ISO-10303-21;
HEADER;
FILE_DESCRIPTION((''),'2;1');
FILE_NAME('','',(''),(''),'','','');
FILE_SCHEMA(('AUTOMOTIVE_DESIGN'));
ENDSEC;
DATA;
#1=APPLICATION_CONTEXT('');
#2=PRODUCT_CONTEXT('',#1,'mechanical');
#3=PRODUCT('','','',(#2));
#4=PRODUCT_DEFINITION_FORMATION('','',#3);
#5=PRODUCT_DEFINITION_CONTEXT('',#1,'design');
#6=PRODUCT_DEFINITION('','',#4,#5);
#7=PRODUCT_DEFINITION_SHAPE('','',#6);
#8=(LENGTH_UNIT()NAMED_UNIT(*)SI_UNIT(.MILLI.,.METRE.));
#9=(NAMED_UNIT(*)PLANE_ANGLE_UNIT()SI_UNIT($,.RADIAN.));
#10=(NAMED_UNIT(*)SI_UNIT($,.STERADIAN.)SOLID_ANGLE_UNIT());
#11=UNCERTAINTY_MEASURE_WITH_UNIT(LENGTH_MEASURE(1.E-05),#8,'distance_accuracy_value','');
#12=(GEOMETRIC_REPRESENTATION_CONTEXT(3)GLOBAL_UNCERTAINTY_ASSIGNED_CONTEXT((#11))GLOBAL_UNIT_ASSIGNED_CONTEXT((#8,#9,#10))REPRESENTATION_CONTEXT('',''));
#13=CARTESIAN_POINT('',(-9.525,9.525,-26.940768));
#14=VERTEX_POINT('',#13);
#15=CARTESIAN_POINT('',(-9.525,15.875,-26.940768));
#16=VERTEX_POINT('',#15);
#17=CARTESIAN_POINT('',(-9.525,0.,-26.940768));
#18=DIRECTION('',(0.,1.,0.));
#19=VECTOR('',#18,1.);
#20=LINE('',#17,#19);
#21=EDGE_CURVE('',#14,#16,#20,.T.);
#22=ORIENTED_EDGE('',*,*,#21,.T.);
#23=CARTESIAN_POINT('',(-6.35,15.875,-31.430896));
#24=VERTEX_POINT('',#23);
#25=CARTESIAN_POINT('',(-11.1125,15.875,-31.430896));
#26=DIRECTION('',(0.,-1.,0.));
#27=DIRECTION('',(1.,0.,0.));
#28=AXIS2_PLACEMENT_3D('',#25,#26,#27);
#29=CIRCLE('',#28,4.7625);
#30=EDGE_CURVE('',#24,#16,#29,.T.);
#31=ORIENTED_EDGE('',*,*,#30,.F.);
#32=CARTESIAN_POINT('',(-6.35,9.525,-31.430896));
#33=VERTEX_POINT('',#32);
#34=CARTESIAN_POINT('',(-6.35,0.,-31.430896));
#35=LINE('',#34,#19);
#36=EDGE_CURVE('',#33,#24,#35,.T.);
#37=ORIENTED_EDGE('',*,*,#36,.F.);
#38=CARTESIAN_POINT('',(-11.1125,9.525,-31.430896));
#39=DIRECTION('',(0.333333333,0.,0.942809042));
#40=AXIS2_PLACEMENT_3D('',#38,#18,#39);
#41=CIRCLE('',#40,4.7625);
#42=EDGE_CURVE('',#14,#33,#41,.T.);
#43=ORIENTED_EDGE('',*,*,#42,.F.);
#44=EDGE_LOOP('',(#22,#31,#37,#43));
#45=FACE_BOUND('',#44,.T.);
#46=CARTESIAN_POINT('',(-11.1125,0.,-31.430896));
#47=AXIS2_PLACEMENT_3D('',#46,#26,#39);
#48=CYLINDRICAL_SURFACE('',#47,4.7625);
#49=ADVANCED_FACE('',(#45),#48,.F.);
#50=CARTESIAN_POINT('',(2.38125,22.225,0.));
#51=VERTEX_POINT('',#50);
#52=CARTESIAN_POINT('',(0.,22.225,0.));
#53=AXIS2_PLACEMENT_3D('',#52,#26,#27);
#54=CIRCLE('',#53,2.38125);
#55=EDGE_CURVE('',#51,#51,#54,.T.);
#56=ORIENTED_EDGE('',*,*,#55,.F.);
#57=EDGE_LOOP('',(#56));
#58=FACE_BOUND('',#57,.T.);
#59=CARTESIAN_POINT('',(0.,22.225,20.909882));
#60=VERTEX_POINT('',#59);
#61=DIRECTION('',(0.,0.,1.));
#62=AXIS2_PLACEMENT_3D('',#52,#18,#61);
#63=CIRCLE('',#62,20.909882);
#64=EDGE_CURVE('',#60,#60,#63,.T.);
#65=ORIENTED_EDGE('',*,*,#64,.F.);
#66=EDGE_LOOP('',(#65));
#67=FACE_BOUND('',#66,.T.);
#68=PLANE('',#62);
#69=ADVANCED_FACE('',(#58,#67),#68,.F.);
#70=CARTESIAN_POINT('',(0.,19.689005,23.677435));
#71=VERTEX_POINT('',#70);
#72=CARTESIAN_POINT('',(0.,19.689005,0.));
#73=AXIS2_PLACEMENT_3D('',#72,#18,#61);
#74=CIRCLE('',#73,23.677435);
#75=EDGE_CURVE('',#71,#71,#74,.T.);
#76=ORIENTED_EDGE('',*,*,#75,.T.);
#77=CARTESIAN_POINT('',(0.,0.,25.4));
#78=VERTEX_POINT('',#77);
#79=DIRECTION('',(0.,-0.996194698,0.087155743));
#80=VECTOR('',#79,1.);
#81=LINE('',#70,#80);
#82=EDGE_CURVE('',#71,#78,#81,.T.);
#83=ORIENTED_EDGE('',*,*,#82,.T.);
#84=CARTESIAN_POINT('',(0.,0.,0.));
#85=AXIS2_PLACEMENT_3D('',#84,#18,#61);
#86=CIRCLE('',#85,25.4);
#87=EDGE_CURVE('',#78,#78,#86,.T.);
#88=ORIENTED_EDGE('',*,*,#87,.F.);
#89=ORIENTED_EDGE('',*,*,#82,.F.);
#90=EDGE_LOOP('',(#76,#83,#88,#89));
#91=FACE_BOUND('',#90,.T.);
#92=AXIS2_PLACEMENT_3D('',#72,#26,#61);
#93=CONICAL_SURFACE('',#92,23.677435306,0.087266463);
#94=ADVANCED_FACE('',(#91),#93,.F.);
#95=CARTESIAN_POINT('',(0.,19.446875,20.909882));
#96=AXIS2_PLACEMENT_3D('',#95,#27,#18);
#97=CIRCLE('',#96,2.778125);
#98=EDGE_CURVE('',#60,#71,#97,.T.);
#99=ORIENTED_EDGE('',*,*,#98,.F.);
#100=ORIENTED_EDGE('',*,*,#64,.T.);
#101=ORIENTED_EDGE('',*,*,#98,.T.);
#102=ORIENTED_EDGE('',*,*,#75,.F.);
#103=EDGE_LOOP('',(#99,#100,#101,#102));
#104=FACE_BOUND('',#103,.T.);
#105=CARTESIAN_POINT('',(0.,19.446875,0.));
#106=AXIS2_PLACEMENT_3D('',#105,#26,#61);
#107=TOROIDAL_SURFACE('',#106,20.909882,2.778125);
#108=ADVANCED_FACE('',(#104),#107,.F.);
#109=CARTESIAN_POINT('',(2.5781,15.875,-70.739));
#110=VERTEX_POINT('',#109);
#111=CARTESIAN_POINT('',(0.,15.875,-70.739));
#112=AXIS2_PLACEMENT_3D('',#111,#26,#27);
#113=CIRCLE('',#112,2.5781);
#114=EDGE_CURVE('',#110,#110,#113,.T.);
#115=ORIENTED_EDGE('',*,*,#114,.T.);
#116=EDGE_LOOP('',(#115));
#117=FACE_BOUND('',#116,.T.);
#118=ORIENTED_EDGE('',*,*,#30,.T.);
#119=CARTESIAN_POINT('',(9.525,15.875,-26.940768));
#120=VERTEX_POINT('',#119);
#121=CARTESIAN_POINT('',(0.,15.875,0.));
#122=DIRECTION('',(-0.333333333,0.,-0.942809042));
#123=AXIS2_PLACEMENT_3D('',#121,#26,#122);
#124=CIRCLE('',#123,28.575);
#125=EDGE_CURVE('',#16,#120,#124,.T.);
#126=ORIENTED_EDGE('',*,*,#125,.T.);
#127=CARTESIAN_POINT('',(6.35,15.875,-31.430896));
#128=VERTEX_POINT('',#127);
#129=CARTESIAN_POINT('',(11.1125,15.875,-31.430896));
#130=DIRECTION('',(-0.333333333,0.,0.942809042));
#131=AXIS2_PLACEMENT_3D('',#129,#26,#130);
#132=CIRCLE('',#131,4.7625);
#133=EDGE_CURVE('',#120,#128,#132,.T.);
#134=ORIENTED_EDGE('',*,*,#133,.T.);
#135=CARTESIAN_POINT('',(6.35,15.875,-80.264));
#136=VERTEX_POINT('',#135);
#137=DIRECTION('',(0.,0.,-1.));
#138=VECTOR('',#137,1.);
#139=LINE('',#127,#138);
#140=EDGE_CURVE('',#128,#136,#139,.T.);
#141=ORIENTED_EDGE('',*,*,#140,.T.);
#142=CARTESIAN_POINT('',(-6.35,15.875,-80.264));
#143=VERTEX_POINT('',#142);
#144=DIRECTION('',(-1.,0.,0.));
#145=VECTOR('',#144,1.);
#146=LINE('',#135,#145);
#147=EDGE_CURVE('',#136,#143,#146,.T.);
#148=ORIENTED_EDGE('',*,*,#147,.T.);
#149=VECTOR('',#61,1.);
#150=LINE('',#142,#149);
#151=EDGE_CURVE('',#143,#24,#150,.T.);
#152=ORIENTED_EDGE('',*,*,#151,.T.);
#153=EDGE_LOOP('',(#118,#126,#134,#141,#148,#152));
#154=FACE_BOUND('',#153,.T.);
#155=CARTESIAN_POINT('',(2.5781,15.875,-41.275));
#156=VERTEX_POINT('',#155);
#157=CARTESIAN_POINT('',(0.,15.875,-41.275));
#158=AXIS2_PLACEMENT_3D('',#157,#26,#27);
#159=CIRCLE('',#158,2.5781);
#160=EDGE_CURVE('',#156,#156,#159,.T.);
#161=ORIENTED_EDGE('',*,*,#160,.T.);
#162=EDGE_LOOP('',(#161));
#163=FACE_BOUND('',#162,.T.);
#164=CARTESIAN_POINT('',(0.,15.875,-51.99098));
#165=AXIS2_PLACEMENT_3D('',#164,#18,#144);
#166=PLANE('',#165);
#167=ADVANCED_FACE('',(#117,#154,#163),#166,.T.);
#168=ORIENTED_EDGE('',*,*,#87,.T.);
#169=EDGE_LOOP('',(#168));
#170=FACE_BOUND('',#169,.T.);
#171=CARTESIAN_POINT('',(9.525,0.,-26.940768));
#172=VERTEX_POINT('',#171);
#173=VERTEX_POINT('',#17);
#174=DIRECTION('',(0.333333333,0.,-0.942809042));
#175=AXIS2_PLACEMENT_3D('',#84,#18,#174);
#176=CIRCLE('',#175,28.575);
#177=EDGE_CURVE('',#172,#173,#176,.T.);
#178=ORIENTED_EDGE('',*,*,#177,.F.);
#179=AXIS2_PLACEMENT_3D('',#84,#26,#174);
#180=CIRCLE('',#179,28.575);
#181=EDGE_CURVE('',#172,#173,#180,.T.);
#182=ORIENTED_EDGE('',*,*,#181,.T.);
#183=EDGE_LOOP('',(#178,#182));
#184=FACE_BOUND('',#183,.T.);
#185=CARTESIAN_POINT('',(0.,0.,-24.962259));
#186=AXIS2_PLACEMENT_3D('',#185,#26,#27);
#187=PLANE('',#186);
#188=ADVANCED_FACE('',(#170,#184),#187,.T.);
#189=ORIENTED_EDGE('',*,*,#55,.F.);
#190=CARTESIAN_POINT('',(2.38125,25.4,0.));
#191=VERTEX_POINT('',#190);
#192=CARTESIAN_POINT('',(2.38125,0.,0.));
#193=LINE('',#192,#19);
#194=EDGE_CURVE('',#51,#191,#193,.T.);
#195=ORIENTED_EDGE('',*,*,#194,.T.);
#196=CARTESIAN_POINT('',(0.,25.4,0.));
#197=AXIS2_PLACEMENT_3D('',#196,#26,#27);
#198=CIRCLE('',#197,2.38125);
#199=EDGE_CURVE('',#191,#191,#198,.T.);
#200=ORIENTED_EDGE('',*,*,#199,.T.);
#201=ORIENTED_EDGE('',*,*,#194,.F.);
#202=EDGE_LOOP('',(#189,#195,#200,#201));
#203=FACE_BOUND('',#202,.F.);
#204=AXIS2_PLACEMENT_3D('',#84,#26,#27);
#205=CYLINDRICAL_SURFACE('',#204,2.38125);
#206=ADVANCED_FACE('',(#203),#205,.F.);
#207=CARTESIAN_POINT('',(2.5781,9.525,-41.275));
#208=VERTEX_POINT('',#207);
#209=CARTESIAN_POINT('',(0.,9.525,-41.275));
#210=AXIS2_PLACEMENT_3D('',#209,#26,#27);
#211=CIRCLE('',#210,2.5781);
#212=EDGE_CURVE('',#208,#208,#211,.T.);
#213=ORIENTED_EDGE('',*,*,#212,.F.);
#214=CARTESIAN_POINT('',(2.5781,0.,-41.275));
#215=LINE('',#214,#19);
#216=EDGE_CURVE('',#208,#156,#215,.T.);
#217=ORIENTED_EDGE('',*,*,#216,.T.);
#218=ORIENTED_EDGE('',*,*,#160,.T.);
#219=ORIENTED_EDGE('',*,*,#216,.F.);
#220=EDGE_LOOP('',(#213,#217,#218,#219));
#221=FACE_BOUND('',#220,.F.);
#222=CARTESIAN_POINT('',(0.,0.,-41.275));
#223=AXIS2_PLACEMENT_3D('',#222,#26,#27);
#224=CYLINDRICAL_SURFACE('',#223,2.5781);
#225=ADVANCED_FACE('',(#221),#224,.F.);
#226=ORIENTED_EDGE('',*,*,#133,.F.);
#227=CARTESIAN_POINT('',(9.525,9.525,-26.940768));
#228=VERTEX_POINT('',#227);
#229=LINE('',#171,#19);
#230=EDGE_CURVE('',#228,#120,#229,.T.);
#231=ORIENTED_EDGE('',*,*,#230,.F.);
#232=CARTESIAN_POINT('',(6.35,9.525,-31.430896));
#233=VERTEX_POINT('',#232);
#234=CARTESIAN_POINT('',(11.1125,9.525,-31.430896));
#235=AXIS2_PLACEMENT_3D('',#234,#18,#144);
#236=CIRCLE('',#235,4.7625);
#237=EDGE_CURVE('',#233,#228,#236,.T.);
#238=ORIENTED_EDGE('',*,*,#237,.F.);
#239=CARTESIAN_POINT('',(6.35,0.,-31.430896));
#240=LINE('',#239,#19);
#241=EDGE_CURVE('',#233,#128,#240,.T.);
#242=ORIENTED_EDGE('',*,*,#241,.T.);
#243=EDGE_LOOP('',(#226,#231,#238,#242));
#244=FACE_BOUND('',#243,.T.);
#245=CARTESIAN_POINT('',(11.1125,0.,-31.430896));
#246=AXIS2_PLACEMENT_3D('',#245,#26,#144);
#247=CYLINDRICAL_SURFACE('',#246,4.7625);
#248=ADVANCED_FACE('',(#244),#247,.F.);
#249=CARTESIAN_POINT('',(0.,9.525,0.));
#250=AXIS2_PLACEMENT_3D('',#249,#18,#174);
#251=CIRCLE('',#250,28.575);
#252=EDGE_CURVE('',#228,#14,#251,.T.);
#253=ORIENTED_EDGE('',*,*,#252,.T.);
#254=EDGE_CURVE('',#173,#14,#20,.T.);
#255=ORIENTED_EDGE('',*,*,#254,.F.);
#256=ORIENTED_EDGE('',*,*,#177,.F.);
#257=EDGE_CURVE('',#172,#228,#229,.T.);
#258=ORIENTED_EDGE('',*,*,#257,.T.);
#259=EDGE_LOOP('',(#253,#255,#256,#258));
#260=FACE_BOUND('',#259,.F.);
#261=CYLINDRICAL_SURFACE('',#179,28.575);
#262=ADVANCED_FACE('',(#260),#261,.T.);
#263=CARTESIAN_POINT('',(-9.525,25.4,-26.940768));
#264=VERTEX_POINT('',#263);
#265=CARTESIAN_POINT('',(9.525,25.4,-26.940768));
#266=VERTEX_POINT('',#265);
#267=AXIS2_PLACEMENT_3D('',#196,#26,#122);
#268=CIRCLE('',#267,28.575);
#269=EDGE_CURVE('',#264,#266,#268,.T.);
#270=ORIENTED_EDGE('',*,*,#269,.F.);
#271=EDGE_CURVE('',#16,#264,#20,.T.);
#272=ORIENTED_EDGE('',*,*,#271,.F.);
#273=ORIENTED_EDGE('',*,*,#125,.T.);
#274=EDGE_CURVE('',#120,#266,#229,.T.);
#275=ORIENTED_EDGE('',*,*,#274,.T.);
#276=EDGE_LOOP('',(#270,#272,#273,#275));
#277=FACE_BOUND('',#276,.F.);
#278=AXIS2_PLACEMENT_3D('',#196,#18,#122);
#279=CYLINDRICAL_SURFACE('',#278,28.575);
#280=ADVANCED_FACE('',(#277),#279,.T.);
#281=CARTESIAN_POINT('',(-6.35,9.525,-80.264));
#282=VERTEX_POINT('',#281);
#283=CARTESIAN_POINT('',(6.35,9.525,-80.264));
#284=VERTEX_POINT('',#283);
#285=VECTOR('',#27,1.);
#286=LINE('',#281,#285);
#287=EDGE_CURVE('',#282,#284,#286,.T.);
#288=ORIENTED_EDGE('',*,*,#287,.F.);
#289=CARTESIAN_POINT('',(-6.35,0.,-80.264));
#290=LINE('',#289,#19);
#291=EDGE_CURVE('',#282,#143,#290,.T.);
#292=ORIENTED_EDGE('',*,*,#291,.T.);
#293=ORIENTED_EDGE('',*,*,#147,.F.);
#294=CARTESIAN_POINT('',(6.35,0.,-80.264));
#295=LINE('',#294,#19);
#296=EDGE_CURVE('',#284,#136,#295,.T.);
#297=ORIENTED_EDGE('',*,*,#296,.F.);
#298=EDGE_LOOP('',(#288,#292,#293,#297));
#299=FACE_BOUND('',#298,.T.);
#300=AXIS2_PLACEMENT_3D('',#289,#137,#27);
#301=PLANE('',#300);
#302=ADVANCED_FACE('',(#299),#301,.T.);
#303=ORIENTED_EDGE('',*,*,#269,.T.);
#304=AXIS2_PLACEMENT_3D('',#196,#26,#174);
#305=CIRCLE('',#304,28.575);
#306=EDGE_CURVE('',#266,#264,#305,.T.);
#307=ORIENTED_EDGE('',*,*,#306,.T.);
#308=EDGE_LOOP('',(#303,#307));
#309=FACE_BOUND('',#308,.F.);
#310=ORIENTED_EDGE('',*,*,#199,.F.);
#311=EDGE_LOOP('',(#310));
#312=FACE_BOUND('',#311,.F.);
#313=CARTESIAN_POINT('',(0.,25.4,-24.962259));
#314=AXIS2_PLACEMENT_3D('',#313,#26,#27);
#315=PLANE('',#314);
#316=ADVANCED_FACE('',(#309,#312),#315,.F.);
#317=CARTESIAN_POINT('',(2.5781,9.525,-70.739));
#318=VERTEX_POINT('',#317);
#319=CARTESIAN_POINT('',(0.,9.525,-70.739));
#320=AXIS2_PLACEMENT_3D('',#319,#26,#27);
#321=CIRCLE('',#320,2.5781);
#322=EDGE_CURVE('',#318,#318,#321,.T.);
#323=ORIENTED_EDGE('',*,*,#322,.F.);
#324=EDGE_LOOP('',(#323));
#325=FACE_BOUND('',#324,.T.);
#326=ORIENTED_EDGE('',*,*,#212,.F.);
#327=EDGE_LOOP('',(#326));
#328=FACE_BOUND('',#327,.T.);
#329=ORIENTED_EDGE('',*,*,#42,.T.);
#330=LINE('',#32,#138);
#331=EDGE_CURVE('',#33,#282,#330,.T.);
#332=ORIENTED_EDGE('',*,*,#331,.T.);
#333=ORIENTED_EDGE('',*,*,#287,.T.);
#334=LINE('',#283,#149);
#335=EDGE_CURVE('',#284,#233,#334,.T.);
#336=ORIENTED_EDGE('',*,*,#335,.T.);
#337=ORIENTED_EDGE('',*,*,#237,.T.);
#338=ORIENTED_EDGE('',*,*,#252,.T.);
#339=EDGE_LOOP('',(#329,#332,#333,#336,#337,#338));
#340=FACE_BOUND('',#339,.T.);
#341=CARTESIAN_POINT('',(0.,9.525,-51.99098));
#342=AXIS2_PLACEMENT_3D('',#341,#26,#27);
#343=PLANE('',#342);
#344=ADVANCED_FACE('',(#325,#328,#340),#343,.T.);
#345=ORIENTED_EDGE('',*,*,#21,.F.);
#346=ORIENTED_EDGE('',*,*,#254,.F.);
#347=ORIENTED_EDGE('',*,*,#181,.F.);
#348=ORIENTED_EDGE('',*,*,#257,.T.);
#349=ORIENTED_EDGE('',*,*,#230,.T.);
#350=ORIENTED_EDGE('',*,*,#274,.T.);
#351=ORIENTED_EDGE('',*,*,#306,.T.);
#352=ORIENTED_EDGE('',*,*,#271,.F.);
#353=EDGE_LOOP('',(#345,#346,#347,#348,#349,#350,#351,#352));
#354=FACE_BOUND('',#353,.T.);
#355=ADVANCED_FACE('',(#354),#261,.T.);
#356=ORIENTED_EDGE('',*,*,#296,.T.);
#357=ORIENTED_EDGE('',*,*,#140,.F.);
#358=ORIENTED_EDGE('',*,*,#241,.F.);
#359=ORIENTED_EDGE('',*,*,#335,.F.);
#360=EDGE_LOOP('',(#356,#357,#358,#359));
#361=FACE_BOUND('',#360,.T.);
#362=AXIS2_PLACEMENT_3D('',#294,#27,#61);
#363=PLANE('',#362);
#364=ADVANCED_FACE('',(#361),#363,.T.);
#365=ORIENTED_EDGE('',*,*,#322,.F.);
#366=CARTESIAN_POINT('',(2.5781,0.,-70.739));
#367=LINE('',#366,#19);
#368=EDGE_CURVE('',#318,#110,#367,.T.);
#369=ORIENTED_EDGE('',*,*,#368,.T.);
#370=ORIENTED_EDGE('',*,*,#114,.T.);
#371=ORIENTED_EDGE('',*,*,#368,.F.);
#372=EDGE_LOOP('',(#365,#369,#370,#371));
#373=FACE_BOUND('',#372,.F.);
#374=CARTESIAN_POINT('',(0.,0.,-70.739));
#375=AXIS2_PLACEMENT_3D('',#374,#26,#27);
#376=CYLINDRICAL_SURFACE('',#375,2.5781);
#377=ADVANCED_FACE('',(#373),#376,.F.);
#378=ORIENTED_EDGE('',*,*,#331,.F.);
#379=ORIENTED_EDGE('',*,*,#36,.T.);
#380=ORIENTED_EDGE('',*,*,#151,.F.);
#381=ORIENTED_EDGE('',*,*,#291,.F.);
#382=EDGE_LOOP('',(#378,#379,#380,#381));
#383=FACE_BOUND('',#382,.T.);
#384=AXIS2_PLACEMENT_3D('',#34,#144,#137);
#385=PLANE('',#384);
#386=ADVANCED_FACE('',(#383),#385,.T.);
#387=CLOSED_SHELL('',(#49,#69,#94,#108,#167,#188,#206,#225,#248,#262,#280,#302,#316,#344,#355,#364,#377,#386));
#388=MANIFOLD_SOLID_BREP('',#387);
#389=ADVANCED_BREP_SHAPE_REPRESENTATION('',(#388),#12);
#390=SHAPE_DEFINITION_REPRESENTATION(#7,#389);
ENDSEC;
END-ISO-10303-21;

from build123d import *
from build123d import SkipClean  # not in build123d's __all__

# Parameters (mm, degrees)
F0_R     = 2.5781
F0_R_2   = 2.38125
F2_DEPTH = 25.4
F4_R     = 2.5781
F5_DEPTH = 9.525
F6_R     = 2.5781
F7_DEPTH = 9.525


with BuildPart() as f2:
    # F0 (on Front) → F2 (new body)
    with BuildSketch(Plane.XZ):
        with BuildLine():
            ThreePointArc((6.35, -31.4308964237), (7.2239350333, -28.6812657667), (9.525, -26.9407683632))
            ThreePointArc((9.525, -26.9407683632), (0, 28.575), (-9.525, -26.9407683632))
            ThreePointArc((-9.525, -26.9407683632), (-7.2239350333, -28.6812657667), (-6.35, -31.4308964237))
            Line((-6.35, -31.4308964237), (-6.35, -80.264))
            Line((-6.35, -80.264), (6.35, -80.264))
            Line((6.35, -80.264), (6.35, -31.4308964237))
        make_face()
        with Locations((0, -70.739)):
            Circle(F0_R, mode=Mode.SUBTRACT)
        with Locations((0, -41.275)):
            Circle(F0_R, mode=Mode.SUBTRACT)
        Circle(F0_R_2, mode=Mode.SUBTRACT)
    extrude(amount=-F2_DEPTH)

    # F1 (on Right) → F3 (revolve, cut)
    with BuildSketch(Plane.YZ):
        with BuildLine():
            Line((19.6890045478, 23.677435306), (0, 25.4))
            Line((0, 25.4), (0, 0))
            Line((0, 0), (22.225, 0))
            Line((22.225, 0), (22.225, 20.9098819103))
            ThreePointArc((22.225, 20.9098819103), (21.4951236013, 22.7867559559), (19.6890045478, 23.677435306))
        make_face()
    revolve(axis=Axis((0, 12.7, 0), (0, 1, 0)), mode=Mode.SUBTRACT)

    # F4 (on face) → F5 (cut)
    with BuildSketch(Plane.XZ):
        with BuildLine():
            ThreePointArc((9.525, -26.9407683632), (0, -28.575), (-9.525, -26.9407683632))
            ThreePointArc((-9.525, -26.9407683632), (-7.2239350333, -28.6812657667), (-6.35, -31.4308964237))
            Line((-6.35, -31.4308964237), (-6.35, -80.264))
            Line((-6.35, -80.264), (6.35, -80.264))
            Line((6.35, -80.264), (6.35, -31.4308964237))
            ThreePointArc((6.35, -31.4308964237), (7.2239350333, -28.6812657667), (9.525, -26.9407683632))
        make_face()
        with Locations((0, -70.739)):
            Circle(F4_R, mode=Mode.SUBTRACT)
        with Locations((0, -41.275)):
            Circle(F4_R, mode=Mode.SUBTRACT)
    with SkipClean():  # cleaning this boolean's faces spoils the solid; the shape is the same uncleaned
        extrude(amount=-F5_DEPTH, mode=Mode.SUBTRACT)

    # F6 (on face) → F7 (cut)
    with BuildSketch(Plane(origin=(0, 25.4, 0), x_dir=(-1, 0, 0), z_dir=(0, 1, 0))):
        with BuildLine():
            ThreePointArc((9.525, -26.9407683632), (0, -28.575), (-9.525, -26.9407683632))
            ThreePointArc((-9.525, -26.9407683632), (-7.2239350333, -28.6812657667), (-6.35, -31.4308964237))
            Line((-6.35, -31.4308964237), (-6.35, -80.264))
            Line((-6.35, -80.264), (6.35, -80.264))
            Line((6.35, -80.264), (6.35, -31.4308964237))
            ThreePointArc((6.35, -31.4308964237), (7.2239350333, -28.6812657667), (9.525, -26.9407683632))
        make_face()
        with Locations((0, -70.739)):
            Circle(F6_R, mode=Mode.SUBTRACT)
        with Locations((0, -41.275)):
            Circle(F6_R, mode=Mode.SUBTRACT)
    extrude(amount=-F7_DEPTH, mode=Mode.SUBTRACT)


solid = f2.part
